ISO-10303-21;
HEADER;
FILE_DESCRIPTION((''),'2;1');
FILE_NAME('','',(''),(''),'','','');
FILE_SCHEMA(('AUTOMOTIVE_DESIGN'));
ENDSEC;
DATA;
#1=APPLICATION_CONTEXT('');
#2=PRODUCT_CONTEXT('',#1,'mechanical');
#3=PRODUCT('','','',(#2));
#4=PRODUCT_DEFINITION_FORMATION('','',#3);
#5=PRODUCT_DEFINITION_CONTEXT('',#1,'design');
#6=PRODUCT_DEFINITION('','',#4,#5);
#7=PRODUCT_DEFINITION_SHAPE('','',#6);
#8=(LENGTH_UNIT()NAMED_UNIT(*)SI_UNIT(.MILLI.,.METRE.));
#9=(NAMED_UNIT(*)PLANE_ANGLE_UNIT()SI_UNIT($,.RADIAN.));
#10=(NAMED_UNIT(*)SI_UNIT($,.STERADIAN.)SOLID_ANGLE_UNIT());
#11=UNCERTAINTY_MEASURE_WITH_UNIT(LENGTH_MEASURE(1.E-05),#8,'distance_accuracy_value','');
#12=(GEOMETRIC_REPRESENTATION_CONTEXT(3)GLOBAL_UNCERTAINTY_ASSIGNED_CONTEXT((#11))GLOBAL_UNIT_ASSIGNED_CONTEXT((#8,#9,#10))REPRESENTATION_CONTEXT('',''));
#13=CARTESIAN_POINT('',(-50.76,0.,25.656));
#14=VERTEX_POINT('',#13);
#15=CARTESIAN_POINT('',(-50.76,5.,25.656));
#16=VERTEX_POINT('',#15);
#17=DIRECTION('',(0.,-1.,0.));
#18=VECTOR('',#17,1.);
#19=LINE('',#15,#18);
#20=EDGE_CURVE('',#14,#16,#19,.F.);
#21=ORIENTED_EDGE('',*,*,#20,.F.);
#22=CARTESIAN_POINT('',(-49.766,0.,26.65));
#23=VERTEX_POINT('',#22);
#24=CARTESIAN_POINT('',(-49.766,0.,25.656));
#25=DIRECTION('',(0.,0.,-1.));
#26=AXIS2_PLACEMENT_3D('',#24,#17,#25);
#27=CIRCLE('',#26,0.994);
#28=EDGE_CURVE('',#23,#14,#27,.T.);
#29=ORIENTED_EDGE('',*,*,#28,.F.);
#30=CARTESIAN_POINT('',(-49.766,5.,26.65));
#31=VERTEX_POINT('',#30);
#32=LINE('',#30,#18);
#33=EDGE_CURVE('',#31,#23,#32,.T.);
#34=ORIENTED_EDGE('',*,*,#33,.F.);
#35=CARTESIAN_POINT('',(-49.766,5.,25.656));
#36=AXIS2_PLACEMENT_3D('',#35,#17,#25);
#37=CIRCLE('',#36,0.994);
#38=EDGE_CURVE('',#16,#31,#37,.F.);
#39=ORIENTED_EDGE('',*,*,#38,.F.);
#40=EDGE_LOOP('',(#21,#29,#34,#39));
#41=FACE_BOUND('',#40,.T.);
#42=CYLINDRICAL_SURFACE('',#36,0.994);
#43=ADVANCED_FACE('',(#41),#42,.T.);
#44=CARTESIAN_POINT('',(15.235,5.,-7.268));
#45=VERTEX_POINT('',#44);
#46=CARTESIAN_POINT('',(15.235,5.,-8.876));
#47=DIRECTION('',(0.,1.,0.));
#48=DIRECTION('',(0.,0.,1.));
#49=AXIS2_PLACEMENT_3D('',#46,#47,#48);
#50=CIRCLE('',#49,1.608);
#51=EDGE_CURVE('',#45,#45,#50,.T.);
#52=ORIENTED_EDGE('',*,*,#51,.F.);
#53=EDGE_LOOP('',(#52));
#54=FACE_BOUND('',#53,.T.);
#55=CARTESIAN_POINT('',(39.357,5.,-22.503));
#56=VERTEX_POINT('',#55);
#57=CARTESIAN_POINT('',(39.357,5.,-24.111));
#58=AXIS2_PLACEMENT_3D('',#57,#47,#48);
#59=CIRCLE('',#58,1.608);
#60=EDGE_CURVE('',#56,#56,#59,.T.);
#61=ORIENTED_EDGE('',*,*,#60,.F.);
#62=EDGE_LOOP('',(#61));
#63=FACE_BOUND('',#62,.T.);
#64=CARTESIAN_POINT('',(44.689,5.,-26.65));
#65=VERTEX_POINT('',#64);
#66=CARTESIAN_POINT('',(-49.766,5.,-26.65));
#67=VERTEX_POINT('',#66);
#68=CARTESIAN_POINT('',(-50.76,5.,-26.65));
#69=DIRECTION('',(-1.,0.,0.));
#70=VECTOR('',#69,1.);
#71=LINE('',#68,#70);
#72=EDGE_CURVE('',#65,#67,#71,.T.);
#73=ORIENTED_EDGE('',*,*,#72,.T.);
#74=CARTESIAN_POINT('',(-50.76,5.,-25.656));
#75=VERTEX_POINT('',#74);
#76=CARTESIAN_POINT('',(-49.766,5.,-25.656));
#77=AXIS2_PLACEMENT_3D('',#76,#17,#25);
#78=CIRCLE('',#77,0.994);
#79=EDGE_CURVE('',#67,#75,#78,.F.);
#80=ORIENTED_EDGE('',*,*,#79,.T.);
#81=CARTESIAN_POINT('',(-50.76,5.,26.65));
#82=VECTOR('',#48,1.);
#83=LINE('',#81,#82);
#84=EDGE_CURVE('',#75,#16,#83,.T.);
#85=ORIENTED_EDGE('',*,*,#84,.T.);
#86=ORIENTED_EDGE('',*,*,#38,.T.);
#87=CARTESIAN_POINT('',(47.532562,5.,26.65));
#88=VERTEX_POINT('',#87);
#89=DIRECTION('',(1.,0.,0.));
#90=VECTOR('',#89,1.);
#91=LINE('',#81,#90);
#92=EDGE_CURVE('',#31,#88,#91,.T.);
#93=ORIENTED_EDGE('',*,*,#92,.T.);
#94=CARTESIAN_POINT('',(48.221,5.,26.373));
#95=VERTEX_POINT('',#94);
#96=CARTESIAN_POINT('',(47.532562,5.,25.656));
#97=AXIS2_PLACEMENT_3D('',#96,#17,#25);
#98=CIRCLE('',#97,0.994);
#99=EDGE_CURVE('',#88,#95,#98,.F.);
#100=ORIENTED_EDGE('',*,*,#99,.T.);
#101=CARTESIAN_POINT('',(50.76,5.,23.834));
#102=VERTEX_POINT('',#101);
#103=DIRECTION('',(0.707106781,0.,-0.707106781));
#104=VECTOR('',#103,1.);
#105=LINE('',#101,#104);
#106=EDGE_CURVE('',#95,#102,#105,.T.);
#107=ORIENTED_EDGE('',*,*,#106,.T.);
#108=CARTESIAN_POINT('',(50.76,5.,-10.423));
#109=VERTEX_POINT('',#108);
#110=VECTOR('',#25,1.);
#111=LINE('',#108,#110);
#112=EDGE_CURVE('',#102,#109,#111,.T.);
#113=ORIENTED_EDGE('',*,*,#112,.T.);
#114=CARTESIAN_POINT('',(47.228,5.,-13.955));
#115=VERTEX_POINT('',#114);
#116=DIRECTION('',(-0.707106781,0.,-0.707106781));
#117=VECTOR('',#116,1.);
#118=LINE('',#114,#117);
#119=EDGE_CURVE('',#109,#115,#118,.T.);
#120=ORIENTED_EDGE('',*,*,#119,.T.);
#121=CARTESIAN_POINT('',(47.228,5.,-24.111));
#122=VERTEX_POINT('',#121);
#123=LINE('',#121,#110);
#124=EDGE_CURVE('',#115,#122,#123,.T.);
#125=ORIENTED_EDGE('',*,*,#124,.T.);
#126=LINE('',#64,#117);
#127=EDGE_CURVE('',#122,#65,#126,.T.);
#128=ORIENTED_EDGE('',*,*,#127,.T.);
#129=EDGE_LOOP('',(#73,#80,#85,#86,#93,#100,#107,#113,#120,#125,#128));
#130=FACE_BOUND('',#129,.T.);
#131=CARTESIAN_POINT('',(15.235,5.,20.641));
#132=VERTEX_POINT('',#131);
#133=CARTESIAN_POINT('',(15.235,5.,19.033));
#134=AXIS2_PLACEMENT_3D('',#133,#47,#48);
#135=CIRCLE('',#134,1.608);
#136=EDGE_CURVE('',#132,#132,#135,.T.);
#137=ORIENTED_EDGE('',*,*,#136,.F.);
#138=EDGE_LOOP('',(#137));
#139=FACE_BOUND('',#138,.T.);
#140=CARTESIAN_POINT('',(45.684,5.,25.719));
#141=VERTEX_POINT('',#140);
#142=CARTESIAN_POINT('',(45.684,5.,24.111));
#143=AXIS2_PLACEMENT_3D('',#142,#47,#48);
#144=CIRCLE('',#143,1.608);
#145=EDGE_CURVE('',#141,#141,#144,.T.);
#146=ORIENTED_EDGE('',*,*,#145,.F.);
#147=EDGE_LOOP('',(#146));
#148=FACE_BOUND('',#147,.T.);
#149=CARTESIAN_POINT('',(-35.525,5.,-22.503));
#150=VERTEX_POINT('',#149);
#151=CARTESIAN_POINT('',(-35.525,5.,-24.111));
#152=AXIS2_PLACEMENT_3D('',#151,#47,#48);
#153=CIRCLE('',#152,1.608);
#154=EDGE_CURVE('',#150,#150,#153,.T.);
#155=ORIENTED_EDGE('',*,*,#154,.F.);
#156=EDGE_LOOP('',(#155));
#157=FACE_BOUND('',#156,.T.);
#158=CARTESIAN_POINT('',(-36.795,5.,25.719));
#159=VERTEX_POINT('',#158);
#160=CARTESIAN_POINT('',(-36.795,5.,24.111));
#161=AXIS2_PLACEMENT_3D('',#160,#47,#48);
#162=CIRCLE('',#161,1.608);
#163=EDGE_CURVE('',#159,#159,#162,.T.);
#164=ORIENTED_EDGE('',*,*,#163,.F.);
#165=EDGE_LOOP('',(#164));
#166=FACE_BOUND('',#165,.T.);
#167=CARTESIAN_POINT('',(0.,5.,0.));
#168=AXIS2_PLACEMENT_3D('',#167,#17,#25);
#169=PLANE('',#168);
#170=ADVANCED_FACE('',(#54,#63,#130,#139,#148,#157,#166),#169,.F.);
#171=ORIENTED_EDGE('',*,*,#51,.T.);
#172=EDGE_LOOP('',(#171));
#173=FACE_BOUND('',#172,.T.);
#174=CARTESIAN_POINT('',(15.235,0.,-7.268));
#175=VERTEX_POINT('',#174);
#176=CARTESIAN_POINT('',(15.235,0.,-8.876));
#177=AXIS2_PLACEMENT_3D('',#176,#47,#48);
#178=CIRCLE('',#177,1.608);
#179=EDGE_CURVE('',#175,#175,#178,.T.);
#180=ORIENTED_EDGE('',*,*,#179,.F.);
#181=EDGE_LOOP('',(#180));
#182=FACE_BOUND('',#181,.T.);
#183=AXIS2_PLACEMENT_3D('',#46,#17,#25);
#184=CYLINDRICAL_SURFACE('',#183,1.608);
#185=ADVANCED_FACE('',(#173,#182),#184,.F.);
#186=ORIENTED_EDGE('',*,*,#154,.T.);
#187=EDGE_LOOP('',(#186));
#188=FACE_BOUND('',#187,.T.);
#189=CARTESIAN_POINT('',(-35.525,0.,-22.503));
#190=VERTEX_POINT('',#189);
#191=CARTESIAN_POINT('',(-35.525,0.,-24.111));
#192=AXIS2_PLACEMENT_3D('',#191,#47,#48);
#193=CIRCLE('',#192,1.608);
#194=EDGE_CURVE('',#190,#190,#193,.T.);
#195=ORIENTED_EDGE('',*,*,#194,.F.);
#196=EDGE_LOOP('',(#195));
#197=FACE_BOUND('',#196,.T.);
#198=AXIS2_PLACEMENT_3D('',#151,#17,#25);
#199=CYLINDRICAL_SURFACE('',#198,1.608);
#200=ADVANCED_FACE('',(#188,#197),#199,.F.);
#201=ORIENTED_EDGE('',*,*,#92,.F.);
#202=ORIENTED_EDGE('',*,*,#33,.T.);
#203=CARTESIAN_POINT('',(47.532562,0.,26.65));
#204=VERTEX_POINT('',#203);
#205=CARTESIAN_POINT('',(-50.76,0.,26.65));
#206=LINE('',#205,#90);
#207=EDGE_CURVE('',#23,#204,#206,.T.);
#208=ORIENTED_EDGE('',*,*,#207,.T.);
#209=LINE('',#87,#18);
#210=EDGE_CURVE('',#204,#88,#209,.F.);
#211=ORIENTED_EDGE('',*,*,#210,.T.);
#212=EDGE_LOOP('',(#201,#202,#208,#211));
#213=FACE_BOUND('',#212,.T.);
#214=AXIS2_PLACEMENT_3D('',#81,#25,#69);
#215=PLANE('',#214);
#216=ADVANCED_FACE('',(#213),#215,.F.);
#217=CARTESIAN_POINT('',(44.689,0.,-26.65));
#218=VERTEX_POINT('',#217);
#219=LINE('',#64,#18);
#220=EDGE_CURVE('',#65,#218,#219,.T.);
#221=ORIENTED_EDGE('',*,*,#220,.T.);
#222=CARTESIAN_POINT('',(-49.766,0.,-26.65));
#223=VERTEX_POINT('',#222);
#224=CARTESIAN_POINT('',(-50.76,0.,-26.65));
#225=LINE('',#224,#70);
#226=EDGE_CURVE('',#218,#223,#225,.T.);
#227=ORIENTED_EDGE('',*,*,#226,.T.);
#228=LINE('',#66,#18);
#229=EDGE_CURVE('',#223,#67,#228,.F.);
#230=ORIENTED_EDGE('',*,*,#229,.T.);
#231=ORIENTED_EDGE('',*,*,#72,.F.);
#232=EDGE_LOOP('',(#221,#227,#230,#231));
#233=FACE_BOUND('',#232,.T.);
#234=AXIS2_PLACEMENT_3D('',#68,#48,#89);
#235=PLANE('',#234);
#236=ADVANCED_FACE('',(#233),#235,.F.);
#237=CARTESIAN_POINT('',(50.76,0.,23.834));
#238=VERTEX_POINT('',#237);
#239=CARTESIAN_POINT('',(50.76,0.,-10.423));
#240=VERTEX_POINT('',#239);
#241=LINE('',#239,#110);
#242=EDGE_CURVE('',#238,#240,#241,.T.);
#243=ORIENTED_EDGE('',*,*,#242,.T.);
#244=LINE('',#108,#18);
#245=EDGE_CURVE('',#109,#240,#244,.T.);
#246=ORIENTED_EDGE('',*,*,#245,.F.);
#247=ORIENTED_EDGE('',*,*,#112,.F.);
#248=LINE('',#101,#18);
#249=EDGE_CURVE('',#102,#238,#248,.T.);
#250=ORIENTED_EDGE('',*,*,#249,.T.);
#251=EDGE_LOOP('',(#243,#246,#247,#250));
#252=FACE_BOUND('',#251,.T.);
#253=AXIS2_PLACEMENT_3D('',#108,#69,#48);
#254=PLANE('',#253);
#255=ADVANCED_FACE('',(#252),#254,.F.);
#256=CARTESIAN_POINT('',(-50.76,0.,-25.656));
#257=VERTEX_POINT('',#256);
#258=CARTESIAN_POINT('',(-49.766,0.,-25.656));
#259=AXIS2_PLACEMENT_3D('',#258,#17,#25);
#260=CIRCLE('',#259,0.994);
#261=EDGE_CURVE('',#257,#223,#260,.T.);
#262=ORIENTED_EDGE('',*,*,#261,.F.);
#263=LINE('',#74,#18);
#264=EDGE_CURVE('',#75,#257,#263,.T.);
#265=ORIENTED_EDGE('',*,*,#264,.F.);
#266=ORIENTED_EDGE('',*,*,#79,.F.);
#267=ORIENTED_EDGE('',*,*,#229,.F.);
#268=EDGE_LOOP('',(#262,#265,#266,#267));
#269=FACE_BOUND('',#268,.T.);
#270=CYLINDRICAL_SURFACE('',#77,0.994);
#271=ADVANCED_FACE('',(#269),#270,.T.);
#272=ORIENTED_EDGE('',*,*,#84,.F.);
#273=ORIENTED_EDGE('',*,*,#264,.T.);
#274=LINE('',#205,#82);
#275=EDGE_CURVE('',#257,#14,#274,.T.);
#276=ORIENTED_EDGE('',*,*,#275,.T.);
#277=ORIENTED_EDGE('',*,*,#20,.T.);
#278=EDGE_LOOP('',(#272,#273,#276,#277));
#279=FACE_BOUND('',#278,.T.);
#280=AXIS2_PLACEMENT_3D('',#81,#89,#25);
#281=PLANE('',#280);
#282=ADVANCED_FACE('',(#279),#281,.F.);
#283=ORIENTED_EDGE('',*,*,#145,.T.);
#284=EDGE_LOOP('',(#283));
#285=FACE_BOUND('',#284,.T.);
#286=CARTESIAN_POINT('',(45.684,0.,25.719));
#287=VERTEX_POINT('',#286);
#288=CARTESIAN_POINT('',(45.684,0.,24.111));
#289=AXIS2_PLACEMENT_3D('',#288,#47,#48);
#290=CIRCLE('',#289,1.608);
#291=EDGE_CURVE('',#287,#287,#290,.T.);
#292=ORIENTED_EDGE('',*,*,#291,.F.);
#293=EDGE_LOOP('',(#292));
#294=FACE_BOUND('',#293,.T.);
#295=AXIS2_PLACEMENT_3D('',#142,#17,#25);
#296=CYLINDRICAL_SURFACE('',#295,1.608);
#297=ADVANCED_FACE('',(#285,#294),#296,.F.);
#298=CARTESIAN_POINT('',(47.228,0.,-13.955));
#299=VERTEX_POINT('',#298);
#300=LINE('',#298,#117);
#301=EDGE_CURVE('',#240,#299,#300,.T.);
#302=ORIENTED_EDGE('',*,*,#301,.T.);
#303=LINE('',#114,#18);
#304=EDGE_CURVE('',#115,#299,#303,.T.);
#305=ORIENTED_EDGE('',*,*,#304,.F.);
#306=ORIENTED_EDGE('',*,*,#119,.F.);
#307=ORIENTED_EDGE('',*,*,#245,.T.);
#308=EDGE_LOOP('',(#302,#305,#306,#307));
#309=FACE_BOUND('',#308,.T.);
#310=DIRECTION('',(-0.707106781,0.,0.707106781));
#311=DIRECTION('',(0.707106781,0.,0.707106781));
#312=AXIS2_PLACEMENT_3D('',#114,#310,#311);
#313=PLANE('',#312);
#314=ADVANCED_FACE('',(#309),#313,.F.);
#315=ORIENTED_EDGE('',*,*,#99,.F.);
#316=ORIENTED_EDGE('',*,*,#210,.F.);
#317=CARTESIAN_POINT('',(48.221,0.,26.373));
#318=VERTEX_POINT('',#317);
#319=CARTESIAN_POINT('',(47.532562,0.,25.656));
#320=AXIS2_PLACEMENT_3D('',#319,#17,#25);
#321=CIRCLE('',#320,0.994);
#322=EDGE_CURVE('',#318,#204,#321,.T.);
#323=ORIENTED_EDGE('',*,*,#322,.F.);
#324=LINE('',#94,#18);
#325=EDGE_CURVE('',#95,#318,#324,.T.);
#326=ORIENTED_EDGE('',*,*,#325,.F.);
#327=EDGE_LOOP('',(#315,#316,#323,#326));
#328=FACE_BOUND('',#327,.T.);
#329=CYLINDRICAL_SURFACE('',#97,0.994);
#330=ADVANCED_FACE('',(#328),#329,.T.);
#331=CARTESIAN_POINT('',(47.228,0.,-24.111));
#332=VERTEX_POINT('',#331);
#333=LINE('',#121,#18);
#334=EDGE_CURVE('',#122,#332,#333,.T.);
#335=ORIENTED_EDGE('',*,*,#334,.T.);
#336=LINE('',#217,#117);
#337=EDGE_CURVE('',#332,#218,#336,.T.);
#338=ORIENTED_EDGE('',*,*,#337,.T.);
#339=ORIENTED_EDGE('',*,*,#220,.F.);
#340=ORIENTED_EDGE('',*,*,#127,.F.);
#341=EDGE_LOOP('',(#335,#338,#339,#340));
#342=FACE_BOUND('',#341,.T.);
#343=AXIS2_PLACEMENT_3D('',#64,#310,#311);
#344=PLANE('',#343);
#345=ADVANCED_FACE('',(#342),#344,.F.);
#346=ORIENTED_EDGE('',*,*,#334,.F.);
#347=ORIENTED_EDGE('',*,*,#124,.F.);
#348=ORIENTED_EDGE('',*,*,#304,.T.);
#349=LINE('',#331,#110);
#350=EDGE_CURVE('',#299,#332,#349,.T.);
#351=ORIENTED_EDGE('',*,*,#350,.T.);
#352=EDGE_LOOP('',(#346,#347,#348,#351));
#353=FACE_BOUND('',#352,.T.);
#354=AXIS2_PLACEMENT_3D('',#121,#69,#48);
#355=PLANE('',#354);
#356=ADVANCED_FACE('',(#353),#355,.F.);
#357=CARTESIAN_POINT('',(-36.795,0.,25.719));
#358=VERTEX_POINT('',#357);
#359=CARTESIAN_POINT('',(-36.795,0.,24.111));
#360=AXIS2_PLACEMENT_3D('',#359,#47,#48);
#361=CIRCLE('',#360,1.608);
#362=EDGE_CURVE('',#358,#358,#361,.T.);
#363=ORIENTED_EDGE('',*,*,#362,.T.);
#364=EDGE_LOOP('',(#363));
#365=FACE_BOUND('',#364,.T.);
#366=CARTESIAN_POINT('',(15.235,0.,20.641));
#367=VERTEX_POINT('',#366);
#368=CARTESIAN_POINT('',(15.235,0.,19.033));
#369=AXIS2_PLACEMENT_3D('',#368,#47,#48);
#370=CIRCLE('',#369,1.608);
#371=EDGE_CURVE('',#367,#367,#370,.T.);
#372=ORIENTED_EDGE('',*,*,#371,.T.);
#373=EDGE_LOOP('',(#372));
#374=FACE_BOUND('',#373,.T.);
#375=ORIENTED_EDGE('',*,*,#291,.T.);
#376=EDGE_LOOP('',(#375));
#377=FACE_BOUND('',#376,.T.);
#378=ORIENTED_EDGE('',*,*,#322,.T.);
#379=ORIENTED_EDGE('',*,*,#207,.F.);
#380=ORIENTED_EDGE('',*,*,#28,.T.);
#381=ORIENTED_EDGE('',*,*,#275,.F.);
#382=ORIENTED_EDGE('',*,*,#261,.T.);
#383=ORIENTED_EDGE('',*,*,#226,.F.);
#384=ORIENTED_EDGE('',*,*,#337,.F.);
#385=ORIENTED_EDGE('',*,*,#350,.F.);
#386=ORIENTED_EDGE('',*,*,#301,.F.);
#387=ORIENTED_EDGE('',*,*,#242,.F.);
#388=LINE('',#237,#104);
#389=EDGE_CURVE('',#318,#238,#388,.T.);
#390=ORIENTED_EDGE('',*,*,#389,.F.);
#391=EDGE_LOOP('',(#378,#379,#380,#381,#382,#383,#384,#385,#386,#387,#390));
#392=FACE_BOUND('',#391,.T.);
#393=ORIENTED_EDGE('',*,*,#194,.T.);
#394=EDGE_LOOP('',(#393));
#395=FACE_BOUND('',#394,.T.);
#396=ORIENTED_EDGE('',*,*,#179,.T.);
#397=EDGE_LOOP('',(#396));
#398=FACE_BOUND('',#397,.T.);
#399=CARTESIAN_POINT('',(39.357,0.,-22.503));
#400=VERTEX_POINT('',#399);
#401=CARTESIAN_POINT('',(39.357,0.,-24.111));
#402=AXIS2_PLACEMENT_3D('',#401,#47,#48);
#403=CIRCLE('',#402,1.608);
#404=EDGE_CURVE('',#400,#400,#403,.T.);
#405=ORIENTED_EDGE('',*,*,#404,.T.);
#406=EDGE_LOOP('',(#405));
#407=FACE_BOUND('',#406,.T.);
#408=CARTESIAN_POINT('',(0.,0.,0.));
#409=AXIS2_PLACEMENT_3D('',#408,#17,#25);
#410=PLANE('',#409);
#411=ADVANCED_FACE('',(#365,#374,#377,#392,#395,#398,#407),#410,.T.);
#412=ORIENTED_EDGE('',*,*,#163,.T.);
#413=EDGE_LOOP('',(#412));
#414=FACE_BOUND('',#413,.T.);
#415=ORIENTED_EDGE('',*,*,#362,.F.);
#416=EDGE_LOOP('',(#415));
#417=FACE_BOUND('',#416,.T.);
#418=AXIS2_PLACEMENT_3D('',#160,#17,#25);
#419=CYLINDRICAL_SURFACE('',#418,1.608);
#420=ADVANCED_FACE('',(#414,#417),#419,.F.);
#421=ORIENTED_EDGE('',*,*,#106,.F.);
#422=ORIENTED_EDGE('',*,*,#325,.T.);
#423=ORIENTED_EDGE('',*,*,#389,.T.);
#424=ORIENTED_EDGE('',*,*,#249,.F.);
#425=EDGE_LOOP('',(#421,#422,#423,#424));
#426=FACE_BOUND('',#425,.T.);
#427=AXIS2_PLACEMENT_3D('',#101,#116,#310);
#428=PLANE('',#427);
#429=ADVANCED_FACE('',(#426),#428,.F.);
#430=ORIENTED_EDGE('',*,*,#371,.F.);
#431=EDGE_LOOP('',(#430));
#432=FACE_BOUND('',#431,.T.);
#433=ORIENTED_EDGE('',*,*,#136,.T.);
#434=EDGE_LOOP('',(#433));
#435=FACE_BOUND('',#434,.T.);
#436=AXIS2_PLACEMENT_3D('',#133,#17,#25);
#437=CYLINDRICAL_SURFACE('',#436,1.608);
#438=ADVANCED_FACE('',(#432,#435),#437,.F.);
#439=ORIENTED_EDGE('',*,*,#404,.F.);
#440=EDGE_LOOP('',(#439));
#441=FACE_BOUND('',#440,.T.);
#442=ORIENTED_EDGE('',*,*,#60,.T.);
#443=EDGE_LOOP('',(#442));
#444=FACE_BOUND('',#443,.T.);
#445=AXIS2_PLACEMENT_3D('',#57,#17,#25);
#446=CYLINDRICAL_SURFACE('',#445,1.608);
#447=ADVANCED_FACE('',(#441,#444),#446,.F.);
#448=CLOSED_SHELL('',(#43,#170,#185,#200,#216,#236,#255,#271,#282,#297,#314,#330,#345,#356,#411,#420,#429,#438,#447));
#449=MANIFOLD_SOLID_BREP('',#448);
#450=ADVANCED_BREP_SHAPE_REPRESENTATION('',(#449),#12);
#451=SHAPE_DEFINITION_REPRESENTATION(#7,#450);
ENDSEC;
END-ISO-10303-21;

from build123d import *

# Parameters (mm, degrees)
BOSS_EXTRUDE1_DEPTH = 5
SKETCH2_R           = 1.608
CUT_EXTRUDE1_DEPTH  = 58.548241502
FILLET1_R           = 0.994


with BuildPart() as part:
    # Sketch1 → Boss-Extrude1 (new body)
    with BuildSketch(Plane(origin=(0, 0, 0), x_dir=(1, 0, 0), z_dir=(0, 1, 0))):
        Polygon((-50.76, -26.65), (-50.76, 26.65), (44.689, 26.65), (47.228, 24.111), (47.228, 13.955), (50.76, 10.423), (50.76, -23.834), (48.221, -26.373), (48.221, -26.65), align=None)
    extrude(amount=BOSS_EXTRUDE1_DEPTH)

    # Sketch2 → Cut-Extrude1 (cut, through all)
    with BuildSketch(Plane(origin=(0, 0, 0), x_dir=(1, 0, 0), z_dir=(0, 1, 0))):
        with Locations(Location((-35.525, 24.111, 0), (0, 0, 270))):
            Circle(SKETCH2_R)
        with Locations(Location((-36.795, -24.111, 0), (0, 0, 270))):
            Circle(SKETCH2_R)
        with Locations(Location((15.235, 8.876, 0), (0, 0, 270))):
            Circle(SKETCH2_R)
        with Locations(Location((15.235, -19.033, 0), (0, 0, 270))):
            Circle(SKETCH2_R)
        with Locations(Location((39.357, 24.111, 0), (0, 0, 270))):
            Circle(SKETCH2_R)
        with Locations(Location((45.684, -24.111, 0), (0, 0, 270))):
            Circle(SKETCH2_R)
    extrude(amount=CUT_EXTRUDE1_DEPTH, mode=Mode.SUBTRACT)

    # Fillet1
    # the kernel refuses this fillet: 0.994 mm, written as the material it takes off along each edge
    with BuildSketch(Plane(origin=(48.221, -1.721095218, 26.65), x_dir=(-1, 0, 0), z_dir=(0, 1, 0))) as fillet1_piece_1:
        with BuildLine():
            CenterArc((0.688438087, -0.994), FILLET1_R, 90, 43.83577097)
            Line((0, -0.277), (-0.013768762, -0.26266))
            ThreePointArc((-0.013768762, -0.26266), (-0.01988, -0.1385), (-0.01988, 0))
            Line((-0.01988, 0), (0, 0.01988))
            Line((0, 0.01988), (0.688438087, 0.01988))
            Line((0.688438087, 0.01988), (0.688438087, 0))
        make_face()
    extrude(amount=8.442190436, mode=Mode.SUBTRACT)
    with BuildSketch(Plane(origin=(-50.76, -2.485, 26.65), x_dir=(0, 0, -1), z_dir=(0, 1, 0))) as fillet1_piece_2:
        with BuildLine():
            CenterArc((FILLET1_R, -FILLET1_R), FILLET1_R, 90, 90)
            Line((0, -FILLET1_R), (-FILLET1_R * 0.02, -FILLET1_R))
            Line((-FILLET1_R * 0.02, -FILLET1_R), (-FILLET1_R * 0.02, FILLET1_R * 0.02))
            Line((-FILLET1_R * 0.02, FILLET1_R * 0.02), (FILLET1_R, FILLET1_R * 0.02))
            Line((FILLET1_R, FILLET1_R * 0.02), (FILLET1_R, 0))
        make_face()
    extrude(amount=9.97, mode=Mode.SUBTRACT)
    with BuildSketch(Plane(origin=(-50.76, -2.485, -26.65), x_dir=(0, 0, 1), z_dir=(0, 1, 0))) as fillet1_piece_3:
        with BuildLine():
            CenterArc((FILLET1_R, FILLET1_R), FILLET1_R, 180, 90)
            Line((0, FILLET1_R), (-FILLET1_R * 0.02, FILLET1_R))
            Line((-FILLET1_R * 0.02, FILLET1_R), (-FILLET1_R * 0.02, -FILLET1_R * 0.02))
            Line((-FILLET1_R * 0.02, -FILLET1_R * 0.02), (FILLET1_R, -FILLET1_R * 0.02))
            Line((FILLET1_R, -FILLET1_R * 0.02), (FILLET1_R, 0))
        make_face()
    extrude(amount=9.97, mode=Mode.SUBTRACT)


solid = part.part
